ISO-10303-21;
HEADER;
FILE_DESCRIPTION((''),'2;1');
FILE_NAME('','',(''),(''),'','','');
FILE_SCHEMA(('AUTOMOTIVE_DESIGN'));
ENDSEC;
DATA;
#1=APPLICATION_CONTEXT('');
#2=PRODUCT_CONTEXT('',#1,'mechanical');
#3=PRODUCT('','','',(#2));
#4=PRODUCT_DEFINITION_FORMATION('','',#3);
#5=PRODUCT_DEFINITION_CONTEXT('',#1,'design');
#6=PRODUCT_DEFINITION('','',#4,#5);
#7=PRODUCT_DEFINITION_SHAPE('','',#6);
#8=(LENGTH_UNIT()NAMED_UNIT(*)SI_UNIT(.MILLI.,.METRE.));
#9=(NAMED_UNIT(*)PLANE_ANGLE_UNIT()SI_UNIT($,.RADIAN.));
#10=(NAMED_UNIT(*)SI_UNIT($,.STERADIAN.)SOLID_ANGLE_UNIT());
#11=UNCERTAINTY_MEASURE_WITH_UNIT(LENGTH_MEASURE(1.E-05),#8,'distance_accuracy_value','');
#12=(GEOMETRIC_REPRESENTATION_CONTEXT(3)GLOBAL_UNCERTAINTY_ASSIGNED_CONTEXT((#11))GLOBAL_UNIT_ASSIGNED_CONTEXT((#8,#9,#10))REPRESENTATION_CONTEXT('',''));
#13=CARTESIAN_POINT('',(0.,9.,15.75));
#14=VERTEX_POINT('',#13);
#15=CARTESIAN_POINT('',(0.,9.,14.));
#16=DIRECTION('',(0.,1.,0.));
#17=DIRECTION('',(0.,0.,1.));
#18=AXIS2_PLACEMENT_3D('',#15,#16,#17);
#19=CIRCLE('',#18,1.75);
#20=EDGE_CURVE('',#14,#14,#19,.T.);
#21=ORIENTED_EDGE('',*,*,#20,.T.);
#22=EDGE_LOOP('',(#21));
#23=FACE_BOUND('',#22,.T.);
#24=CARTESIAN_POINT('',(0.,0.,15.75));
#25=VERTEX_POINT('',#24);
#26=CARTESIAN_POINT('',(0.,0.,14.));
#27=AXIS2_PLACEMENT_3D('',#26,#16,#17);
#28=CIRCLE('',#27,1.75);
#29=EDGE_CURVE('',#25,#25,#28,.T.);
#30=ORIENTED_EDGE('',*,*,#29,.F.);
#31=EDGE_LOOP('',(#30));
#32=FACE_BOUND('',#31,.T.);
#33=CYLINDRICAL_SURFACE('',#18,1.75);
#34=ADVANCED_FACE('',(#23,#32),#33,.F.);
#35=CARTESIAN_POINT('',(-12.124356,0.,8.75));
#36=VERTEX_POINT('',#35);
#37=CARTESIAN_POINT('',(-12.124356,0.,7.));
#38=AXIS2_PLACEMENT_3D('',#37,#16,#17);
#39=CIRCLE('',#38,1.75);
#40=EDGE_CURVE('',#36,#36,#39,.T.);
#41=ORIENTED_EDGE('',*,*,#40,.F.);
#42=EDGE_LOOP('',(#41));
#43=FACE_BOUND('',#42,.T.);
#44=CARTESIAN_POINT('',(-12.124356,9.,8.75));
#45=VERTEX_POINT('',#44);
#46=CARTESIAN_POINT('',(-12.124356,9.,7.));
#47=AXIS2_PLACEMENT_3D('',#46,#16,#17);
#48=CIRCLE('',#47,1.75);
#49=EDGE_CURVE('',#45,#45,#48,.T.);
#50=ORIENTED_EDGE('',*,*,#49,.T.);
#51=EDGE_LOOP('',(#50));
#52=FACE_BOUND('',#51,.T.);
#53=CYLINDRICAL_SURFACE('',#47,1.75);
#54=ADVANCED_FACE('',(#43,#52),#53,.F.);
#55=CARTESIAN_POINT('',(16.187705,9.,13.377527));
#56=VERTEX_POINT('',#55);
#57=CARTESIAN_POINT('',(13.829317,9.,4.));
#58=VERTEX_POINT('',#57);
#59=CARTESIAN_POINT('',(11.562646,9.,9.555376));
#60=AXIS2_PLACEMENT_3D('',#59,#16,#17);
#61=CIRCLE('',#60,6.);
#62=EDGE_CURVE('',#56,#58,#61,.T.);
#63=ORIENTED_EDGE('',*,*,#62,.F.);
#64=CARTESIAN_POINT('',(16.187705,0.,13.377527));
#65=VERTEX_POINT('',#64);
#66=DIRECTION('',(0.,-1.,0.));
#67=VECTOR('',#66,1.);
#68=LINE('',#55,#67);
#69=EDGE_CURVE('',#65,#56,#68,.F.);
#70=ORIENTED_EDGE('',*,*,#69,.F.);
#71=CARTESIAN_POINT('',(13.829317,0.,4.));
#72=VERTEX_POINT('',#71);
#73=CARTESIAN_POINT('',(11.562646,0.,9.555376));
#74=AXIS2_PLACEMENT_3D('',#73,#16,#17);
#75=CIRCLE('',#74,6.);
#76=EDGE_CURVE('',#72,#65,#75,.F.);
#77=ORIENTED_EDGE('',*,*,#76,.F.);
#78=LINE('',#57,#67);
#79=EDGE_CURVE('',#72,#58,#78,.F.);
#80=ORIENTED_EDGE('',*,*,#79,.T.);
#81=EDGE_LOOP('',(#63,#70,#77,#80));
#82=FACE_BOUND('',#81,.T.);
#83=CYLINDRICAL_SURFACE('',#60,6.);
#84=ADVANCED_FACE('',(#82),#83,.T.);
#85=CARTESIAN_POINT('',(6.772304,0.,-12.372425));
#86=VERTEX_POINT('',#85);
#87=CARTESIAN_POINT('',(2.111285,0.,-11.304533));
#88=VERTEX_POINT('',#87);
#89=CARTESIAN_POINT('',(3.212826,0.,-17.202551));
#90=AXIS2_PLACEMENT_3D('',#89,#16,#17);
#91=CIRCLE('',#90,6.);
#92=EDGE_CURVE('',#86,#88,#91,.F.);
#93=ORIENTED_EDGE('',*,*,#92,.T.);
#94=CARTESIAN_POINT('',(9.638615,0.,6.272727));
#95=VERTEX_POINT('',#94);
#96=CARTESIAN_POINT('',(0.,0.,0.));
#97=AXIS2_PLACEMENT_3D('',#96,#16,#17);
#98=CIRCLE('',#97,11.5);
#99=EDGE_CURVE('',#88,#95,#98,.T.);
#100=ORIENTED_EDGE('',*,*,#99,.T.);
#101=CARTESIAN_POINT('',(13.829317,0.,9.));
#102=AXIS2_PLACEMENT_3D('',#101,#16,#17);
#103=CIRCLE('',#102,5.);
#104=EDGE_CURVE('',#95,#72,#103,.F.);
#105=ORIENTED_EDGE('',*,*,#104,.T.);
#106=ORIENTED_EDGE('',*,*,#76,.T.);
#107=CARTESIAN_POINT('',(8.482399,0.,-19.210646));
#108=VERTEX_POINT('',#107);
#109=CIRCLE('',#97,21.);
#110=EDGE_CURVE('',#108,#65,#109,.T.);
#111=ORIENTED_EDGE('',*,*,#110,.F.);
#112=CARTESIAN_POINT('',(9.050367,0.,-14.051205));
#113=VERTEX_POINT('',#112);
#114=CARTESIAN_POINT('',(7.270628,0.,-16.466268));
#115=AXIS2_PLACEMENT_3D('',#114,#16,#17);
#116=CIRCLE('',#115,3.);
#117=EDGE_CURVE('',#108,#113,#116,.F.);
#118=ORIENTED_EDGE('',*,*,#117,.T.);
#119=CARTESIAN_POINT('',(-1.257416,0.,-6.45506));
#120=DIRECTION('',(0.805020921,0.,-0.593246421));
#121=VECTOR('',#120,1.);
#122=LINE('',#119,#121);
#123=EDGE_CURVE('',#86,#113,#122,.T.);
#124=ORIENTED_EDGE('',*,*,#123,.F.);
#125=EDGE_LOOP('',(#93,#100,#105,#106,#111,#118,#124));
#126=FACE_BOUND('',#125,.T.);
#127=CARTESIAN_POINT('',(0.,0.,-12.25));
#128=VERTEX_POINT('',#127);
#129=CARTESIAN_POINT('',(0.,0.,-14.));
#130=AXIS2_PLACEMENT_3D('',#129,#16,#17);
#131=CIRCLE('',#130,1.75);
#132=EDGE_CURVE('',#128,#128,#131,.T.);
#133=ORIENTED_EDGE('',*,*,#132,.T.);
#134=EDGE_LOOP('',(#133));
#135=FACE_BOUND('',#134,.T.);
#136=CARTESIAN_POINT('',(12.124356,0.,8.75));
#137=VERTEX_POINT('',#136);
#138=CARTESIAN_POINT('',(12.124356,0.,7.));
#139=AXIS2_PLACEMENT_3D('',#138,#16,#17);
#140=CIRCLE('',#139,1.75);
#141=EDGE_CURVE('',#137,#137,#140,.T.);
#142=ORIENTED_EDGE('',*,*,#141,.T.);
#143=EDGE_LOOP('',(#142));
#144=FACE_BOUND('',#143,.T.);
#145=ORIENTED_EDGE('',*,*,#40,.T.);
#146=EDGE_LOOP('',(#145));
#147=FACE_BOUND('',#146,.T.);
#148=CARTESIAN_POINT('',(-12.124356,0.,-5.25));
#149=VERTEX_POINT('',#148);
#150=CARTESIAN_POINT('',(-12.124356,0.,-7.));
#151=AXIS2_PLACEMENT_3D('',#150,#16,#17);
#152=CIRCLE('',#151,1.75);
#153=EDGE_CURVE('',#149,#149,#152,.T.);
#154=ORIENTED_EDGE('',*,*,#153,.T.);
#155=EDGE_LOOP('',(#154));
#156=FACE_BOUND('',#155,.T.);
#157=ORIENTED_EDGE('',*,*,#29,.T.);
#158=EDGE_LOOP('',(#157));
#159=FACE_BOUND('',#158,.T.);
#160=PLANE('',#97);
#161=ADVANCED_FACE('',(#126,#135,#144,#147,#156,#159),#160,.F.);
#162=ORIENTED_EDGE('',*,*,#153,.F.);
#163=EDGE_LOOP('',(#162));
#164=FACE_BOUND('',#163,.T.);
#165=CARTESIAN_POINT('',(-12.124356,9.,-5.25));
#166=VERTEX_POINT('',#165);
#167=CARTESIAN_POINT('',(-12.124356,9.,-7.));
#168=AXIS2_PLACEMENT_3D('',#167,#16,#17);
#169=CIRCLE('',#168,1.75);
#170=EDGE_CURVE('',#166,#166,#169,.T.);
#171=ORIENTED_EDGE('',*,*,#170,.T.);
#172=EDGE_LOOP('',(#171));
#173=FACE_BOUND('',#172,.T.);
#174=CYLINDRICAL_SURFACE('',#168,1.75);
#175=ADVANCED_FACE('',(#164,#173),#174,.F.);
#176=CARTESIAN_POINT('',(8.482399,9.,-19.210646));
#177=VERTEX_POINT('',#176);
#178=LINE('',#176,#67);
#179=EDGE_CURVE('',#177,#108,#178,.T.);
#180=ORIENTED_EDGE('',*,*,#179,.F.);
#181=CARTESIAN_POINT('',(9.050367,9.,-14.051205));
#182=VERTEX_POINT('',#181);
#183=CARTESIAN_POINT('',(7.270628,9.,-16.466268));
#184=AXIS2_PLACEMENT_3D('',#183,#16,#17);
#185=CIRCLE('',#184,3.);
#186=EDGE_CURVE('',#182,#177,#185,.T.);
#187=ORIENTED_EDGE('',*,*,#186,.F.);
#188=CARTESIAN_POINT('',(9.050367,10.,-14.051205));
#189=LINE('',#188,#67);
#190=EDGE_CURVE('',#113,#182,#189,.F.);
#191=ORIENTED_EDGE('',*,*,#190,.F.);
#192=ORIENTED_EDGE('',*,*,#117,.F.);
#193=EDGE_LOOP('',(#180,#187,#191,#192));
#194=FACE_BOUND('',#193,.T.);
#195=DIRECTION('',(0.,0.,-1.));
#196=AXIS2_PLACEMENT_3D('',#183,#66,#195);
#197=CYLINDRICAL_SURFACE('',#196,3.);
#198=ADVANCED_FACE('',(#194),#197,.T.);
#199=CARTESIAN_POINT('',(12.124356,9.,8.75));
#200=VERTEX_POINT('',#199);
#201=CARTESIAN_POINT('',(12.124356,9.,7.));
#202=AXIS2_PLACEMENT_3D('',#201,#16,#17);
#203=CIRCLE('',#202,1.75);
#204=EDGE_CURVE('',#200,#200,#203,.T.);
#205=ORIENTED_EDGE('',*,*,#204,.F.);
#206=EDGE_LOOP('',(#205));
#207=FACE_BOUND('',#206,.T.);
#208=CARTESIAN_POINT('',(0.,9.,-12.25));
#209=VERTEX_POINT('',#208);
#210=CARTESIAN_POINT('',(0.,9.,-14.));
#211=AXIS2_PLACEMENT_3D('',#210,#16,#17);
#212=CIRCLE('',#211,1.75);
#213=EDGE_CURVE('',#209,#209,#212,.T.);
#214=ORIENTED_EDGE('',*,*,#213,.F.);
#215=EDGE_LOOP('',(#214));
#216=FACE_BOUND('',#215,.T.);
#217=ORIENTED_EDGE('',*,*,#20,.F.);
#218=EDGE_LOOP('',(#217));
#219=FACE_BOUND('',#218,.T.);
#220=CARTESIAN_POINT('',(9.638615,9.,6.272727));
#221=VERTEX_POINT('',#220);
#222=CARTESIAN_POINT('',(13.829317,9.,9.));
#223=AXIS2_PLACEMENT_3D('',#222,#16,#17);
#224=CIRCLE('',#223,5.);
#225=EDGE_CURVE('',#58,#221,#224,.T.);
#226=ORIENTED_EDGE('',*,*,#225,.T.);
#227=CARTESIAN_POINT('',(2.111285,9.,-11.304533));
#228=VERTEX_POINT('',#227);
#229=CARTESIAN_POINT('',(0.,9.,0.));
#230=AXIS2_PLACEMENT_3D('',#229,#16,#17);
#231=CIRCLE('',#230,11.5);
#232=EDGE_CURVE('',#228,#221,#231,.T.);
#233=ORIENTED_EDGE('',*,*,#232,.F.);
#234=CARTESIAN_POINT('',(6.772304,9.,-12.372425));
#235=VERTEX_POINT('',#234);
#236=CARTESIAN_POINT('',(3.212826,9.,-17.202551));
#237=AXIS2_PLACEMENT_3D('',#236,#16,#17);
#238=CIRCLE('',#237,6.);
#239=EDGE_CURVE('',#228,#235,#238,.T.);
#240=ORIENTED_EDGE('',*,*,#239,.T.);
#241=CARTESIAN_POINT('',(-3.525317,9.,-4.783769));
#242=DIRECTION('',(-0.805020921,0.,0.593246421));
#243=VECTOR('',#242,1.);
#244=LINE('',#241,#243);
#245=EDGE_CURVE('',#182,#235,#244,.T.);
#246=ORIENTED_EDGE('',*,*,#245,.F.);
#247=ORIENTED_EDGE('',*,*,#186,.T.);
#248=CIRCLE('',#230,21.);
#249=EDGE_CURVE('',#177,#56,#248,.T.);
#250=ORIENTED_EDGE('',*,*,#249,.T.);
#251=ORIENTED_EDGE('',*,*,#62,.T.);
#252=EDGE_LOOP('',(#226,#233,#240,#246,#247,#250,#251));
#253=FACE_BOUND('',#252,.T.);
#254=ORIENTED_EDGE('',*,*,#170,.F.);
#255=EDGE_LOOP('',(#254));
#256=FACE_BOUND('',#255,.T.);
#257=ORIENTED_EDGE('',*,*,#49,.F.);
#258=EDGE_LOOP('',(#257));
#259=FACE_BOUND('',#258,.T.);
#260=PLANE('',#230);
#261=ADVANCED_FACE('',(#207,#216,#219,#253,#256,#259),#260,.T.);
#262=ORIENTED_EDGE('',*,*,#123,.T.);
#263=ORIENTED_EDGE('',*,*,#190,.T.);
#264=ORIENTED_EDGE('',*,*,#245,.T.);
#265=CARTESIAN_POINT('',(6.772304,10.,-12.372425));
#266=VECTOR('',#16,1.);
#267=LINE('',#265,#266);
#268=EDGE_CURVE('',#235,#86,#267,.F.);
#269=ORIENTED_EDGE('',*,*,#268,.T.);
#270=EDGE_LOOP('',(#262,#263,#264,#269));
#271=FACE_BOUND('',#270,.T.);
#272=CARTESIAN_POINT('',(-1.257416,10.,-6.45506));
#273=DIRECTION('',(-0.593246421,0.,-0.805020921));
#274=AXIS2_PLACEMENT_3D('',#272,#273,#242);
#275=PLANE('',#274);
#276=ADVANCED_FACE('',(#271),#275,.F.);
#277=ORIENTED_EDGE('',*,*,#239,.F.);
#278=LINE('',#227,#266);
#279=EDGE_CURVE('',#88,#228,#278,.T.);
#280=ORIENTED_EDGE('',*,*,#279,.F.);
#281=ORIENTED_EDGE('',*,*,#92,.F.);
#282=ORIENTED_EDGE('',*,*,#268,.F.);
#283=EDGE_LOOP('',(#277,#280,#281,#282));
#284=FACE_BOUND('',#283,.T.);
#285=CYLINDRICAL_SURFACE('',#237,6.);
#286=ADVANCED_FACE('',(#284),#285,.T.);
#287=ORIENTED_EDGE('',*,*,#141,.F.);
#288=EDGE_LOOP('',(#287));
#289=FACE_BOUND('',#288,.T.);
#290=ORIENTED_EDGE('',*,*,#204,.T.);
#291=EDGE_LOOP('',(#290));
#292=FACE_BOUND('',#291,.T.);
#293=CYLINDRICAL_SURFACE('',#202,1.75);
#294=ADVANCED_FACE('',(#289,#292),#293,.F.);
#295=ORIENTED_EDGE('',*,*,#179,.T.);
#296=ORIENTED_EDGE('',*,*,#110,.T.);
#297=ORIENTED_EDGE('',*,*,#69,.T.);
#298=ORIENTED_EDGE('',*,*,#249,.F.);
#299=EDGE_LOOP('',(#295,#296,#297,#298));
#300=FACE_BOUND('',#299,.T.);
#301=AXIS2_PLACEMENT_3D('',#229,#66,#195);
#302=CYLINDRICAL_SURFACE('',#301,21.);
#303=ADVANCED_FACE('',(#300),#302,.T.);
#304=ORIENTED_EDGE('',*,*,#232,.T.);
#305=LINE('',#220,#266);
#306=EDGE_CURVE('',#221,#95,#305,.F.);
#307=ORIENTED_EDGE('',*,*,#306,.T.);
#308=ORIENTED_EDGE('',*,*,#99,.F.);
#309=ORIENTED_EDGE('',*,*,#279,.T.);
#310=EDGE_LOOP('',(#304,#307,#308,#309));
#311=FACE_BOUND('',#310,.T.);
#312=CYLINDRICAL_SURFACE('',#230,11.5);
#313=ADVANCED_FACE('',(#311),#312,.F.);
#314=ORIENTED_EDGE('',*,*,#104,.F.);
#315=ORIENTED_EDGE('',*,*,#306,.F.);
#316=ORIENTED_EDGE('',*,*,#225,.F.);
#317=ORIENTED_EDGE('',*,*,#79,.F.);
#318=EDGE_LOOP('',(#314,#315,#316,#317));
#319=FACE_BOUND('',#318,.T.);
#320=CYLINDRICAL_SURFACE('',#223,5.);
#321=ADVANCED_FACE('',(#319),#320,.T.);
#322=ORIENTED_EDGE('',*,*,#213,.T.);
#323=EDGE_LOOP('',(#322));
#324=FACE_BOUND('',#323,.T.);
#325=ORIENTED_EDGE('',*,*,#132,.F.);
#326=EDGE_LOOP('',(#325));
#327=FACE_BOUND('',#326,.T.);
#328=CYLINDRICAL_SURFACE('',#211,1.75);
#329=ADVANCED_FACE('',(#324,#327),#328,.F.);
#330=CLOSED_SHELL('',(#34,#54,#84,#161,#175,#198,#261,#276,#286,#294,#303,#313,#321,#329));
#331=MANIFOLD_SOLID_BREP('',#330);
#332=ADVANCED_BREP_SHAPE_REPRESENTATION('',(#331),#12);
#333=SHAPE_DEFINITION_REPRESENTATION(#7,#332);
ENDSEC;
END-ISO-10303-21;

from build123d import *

# Parameters (mm, degrees)
SKETCH_1_R               = 21
EXTRUDE_1_DEPTH          = 9
HOLE_WIZARD_1_D          = 3.5
PATTERN_CIRCULAR_1_COUNT = 6
HOLE_WIZARD_2_D          = 23
SKETCH_7_W               = 20
SKETCH_7_H               = 8
CUT_EXTRUDE_1_DEPTH      = 10
FILLET_1_R               = 5
FILLET_2_R               = 6
CUT_EXTRUDE_2_DEPTH      = 10
FILLET_3_R               = 6
FILLET_4_R               = 3


with BuildPart() as part:
    # 草图1 → 凸台-拉伸1 (new body)
    with BuildSketch(Plane(origin=(0, 0, 0), x_dir=(1, 0, 0), z_dir=(0, 1, 0))):
        with Locations(Location((0, 0, 0), (0, 0, 270))):
            Circle(SKETCH_1_R)
    extrude(amount=EXTRUDE_1_DEPTH)

    # 孔1 (through all)
    with Locations(Plane(origin=(0, 9, 0), x_dir=(1, 0, 0), z_dir=(0, 1, 0))):
        with Locations((0, 14)):
            hole_wizard_1 = Hole(HOLE_WIZARD_1_D / 2)

    # 阵列(圆周)1: 孔1 ×6 about axis
    pattern_circular_1_axis = Axis((0, 0, 0), (0, 1, 0))
    for i in range(1, PATTERN_CIRCULAR_1_COUNT):
        add(hole_wizard_1.rotate(pattern_circular_1_axis, i * 360 / PATTERN_CIRCULAR_1_COUNT), mode=Mode.SUBTRACT)

    # 孔2 (through all)
    with Locations(Plane(origin=(0, 9, 0), x_dir=(1, 0, 0), z_dir=(0, 1, 0))):
        with Locations((0, 0)):
            Hole(HOLE_WIZARD_2_D / 2)

    # 草图7 → 切除-拉伸1 (cut)
    with BuildSketch(Plane.XZ):
        with Locations((14, 0)):
            Rectangle(SKETCH_7_W, SKETCH_7_H)
    extrude(amount=-CUT_EXTRUDE_1_DEPTH, mode=Mode.SUBTRACT)

    # 圆角1
    fillet_1_edges = [part.edges().sort_by_distance(p)[0] for p in [
        (10.781929326, 4.5, -4),
        (10.781929326, 4.5, 4),
    ]]
    fillet(fillet_1_edges, radius=FILLET_1_R)

    # 圆角2
    # the kernel refuses this fillet: 6 mm, written as the material it takes off along each edge
    with BuildSketch(Plane(origin=(20.615528128, 34.925810939, 4), x_dir=(-1, 0, 0), z_dir=(0, -1, 0))) as fillet_2_piece_1:
        with BuildLine():
            CenterArc((9.052881986, -5.555376193), FILLET_2_R, 112.196140843, 107.374202327)
            Line((4.427823529, -9.37752667), (4.33532236, -9.45396968))
            ThreePointArc((4.33532236, -9.45396968), (1.517440537, -5.017618885), (-0.117803018, -0.022857143))
            Line((-0.117803018, -0.022857143), (0, 0.12))
            ThreePointArc((0, 0.12), (3.393105721, 0.12), (6.740878031, 0.111107524))
            Line((6.740878031, 0.111107524), (6.786211442, 0))
        make_face()
    extrude(amount=60.851621878, mode=Mode.SUBTRACT)
    with BuildSketch(Plane(origin=(20.615528128, 34.925810939, -4), x_dir=(-0.42697059114477015, 0, -0.9042655109521127), z_dir=(0, -1, 0))) as fillet_2_piece_2:
        with BuildLine():
            CenterArc((8.888849465, -5.814226697), FILLET_2_R, 75.705116129, 107.374202327)
            Line((2.897512711, -6.136536957), (2.777685976, -6.142983162))
            ThreePointArc((2.777685976, -6.142983162), (1.340244494, -3.11950495), (-0.108511861, -0.051236471))
            Line((-0.108511861, -0.051236471), (-0.029629498, 0.116284534))
            ThreePointArc((-0.029629498, 0.116284534), (5.185162188, 0.770206559), (10.399953874, 0.116284534))
            Line((10.399953874, 0.116284534), (10.370324376, 0))
        make_face()
    extrude(amount=60.851621878, mode=Mode.SUBTRACT)

    # 草图8 → 切除-拉伸2 (cut)
    with BuildSketch(Plane(origin=(0, 0, 0), x_dir=(-1, 0, 0), z_dir=(0, -1, 0))):
        Polygon((1.25741602, 6.455059929), (-16.607431005, 19.620253888), (-25.506127326, 7.544940071), (-7.641280301, -5.620253888), align=None)
    extrude(amount=-CUT_EXTRUDE_2_DEPTH, mode=Mode.SUBTRACT)

    # 圆角3
    fillet_3_edges = [part.edges().sort_by_distance(p)[0] for p in [
        (4.400672865, 4.5, -10.624691917),
    ]]
    fillet(fillet_3_edges, radius=FILLET_3_R)

    # 圆角4
    fillet_4_edges = [part.edges().sort_by_distance(p)[0] for p in [
        (12.68916526, 4.5, -16.732754854),
    ]]
    fillet(fillet_4_edges, radius=FILLET_4_R)


solid = part.part
